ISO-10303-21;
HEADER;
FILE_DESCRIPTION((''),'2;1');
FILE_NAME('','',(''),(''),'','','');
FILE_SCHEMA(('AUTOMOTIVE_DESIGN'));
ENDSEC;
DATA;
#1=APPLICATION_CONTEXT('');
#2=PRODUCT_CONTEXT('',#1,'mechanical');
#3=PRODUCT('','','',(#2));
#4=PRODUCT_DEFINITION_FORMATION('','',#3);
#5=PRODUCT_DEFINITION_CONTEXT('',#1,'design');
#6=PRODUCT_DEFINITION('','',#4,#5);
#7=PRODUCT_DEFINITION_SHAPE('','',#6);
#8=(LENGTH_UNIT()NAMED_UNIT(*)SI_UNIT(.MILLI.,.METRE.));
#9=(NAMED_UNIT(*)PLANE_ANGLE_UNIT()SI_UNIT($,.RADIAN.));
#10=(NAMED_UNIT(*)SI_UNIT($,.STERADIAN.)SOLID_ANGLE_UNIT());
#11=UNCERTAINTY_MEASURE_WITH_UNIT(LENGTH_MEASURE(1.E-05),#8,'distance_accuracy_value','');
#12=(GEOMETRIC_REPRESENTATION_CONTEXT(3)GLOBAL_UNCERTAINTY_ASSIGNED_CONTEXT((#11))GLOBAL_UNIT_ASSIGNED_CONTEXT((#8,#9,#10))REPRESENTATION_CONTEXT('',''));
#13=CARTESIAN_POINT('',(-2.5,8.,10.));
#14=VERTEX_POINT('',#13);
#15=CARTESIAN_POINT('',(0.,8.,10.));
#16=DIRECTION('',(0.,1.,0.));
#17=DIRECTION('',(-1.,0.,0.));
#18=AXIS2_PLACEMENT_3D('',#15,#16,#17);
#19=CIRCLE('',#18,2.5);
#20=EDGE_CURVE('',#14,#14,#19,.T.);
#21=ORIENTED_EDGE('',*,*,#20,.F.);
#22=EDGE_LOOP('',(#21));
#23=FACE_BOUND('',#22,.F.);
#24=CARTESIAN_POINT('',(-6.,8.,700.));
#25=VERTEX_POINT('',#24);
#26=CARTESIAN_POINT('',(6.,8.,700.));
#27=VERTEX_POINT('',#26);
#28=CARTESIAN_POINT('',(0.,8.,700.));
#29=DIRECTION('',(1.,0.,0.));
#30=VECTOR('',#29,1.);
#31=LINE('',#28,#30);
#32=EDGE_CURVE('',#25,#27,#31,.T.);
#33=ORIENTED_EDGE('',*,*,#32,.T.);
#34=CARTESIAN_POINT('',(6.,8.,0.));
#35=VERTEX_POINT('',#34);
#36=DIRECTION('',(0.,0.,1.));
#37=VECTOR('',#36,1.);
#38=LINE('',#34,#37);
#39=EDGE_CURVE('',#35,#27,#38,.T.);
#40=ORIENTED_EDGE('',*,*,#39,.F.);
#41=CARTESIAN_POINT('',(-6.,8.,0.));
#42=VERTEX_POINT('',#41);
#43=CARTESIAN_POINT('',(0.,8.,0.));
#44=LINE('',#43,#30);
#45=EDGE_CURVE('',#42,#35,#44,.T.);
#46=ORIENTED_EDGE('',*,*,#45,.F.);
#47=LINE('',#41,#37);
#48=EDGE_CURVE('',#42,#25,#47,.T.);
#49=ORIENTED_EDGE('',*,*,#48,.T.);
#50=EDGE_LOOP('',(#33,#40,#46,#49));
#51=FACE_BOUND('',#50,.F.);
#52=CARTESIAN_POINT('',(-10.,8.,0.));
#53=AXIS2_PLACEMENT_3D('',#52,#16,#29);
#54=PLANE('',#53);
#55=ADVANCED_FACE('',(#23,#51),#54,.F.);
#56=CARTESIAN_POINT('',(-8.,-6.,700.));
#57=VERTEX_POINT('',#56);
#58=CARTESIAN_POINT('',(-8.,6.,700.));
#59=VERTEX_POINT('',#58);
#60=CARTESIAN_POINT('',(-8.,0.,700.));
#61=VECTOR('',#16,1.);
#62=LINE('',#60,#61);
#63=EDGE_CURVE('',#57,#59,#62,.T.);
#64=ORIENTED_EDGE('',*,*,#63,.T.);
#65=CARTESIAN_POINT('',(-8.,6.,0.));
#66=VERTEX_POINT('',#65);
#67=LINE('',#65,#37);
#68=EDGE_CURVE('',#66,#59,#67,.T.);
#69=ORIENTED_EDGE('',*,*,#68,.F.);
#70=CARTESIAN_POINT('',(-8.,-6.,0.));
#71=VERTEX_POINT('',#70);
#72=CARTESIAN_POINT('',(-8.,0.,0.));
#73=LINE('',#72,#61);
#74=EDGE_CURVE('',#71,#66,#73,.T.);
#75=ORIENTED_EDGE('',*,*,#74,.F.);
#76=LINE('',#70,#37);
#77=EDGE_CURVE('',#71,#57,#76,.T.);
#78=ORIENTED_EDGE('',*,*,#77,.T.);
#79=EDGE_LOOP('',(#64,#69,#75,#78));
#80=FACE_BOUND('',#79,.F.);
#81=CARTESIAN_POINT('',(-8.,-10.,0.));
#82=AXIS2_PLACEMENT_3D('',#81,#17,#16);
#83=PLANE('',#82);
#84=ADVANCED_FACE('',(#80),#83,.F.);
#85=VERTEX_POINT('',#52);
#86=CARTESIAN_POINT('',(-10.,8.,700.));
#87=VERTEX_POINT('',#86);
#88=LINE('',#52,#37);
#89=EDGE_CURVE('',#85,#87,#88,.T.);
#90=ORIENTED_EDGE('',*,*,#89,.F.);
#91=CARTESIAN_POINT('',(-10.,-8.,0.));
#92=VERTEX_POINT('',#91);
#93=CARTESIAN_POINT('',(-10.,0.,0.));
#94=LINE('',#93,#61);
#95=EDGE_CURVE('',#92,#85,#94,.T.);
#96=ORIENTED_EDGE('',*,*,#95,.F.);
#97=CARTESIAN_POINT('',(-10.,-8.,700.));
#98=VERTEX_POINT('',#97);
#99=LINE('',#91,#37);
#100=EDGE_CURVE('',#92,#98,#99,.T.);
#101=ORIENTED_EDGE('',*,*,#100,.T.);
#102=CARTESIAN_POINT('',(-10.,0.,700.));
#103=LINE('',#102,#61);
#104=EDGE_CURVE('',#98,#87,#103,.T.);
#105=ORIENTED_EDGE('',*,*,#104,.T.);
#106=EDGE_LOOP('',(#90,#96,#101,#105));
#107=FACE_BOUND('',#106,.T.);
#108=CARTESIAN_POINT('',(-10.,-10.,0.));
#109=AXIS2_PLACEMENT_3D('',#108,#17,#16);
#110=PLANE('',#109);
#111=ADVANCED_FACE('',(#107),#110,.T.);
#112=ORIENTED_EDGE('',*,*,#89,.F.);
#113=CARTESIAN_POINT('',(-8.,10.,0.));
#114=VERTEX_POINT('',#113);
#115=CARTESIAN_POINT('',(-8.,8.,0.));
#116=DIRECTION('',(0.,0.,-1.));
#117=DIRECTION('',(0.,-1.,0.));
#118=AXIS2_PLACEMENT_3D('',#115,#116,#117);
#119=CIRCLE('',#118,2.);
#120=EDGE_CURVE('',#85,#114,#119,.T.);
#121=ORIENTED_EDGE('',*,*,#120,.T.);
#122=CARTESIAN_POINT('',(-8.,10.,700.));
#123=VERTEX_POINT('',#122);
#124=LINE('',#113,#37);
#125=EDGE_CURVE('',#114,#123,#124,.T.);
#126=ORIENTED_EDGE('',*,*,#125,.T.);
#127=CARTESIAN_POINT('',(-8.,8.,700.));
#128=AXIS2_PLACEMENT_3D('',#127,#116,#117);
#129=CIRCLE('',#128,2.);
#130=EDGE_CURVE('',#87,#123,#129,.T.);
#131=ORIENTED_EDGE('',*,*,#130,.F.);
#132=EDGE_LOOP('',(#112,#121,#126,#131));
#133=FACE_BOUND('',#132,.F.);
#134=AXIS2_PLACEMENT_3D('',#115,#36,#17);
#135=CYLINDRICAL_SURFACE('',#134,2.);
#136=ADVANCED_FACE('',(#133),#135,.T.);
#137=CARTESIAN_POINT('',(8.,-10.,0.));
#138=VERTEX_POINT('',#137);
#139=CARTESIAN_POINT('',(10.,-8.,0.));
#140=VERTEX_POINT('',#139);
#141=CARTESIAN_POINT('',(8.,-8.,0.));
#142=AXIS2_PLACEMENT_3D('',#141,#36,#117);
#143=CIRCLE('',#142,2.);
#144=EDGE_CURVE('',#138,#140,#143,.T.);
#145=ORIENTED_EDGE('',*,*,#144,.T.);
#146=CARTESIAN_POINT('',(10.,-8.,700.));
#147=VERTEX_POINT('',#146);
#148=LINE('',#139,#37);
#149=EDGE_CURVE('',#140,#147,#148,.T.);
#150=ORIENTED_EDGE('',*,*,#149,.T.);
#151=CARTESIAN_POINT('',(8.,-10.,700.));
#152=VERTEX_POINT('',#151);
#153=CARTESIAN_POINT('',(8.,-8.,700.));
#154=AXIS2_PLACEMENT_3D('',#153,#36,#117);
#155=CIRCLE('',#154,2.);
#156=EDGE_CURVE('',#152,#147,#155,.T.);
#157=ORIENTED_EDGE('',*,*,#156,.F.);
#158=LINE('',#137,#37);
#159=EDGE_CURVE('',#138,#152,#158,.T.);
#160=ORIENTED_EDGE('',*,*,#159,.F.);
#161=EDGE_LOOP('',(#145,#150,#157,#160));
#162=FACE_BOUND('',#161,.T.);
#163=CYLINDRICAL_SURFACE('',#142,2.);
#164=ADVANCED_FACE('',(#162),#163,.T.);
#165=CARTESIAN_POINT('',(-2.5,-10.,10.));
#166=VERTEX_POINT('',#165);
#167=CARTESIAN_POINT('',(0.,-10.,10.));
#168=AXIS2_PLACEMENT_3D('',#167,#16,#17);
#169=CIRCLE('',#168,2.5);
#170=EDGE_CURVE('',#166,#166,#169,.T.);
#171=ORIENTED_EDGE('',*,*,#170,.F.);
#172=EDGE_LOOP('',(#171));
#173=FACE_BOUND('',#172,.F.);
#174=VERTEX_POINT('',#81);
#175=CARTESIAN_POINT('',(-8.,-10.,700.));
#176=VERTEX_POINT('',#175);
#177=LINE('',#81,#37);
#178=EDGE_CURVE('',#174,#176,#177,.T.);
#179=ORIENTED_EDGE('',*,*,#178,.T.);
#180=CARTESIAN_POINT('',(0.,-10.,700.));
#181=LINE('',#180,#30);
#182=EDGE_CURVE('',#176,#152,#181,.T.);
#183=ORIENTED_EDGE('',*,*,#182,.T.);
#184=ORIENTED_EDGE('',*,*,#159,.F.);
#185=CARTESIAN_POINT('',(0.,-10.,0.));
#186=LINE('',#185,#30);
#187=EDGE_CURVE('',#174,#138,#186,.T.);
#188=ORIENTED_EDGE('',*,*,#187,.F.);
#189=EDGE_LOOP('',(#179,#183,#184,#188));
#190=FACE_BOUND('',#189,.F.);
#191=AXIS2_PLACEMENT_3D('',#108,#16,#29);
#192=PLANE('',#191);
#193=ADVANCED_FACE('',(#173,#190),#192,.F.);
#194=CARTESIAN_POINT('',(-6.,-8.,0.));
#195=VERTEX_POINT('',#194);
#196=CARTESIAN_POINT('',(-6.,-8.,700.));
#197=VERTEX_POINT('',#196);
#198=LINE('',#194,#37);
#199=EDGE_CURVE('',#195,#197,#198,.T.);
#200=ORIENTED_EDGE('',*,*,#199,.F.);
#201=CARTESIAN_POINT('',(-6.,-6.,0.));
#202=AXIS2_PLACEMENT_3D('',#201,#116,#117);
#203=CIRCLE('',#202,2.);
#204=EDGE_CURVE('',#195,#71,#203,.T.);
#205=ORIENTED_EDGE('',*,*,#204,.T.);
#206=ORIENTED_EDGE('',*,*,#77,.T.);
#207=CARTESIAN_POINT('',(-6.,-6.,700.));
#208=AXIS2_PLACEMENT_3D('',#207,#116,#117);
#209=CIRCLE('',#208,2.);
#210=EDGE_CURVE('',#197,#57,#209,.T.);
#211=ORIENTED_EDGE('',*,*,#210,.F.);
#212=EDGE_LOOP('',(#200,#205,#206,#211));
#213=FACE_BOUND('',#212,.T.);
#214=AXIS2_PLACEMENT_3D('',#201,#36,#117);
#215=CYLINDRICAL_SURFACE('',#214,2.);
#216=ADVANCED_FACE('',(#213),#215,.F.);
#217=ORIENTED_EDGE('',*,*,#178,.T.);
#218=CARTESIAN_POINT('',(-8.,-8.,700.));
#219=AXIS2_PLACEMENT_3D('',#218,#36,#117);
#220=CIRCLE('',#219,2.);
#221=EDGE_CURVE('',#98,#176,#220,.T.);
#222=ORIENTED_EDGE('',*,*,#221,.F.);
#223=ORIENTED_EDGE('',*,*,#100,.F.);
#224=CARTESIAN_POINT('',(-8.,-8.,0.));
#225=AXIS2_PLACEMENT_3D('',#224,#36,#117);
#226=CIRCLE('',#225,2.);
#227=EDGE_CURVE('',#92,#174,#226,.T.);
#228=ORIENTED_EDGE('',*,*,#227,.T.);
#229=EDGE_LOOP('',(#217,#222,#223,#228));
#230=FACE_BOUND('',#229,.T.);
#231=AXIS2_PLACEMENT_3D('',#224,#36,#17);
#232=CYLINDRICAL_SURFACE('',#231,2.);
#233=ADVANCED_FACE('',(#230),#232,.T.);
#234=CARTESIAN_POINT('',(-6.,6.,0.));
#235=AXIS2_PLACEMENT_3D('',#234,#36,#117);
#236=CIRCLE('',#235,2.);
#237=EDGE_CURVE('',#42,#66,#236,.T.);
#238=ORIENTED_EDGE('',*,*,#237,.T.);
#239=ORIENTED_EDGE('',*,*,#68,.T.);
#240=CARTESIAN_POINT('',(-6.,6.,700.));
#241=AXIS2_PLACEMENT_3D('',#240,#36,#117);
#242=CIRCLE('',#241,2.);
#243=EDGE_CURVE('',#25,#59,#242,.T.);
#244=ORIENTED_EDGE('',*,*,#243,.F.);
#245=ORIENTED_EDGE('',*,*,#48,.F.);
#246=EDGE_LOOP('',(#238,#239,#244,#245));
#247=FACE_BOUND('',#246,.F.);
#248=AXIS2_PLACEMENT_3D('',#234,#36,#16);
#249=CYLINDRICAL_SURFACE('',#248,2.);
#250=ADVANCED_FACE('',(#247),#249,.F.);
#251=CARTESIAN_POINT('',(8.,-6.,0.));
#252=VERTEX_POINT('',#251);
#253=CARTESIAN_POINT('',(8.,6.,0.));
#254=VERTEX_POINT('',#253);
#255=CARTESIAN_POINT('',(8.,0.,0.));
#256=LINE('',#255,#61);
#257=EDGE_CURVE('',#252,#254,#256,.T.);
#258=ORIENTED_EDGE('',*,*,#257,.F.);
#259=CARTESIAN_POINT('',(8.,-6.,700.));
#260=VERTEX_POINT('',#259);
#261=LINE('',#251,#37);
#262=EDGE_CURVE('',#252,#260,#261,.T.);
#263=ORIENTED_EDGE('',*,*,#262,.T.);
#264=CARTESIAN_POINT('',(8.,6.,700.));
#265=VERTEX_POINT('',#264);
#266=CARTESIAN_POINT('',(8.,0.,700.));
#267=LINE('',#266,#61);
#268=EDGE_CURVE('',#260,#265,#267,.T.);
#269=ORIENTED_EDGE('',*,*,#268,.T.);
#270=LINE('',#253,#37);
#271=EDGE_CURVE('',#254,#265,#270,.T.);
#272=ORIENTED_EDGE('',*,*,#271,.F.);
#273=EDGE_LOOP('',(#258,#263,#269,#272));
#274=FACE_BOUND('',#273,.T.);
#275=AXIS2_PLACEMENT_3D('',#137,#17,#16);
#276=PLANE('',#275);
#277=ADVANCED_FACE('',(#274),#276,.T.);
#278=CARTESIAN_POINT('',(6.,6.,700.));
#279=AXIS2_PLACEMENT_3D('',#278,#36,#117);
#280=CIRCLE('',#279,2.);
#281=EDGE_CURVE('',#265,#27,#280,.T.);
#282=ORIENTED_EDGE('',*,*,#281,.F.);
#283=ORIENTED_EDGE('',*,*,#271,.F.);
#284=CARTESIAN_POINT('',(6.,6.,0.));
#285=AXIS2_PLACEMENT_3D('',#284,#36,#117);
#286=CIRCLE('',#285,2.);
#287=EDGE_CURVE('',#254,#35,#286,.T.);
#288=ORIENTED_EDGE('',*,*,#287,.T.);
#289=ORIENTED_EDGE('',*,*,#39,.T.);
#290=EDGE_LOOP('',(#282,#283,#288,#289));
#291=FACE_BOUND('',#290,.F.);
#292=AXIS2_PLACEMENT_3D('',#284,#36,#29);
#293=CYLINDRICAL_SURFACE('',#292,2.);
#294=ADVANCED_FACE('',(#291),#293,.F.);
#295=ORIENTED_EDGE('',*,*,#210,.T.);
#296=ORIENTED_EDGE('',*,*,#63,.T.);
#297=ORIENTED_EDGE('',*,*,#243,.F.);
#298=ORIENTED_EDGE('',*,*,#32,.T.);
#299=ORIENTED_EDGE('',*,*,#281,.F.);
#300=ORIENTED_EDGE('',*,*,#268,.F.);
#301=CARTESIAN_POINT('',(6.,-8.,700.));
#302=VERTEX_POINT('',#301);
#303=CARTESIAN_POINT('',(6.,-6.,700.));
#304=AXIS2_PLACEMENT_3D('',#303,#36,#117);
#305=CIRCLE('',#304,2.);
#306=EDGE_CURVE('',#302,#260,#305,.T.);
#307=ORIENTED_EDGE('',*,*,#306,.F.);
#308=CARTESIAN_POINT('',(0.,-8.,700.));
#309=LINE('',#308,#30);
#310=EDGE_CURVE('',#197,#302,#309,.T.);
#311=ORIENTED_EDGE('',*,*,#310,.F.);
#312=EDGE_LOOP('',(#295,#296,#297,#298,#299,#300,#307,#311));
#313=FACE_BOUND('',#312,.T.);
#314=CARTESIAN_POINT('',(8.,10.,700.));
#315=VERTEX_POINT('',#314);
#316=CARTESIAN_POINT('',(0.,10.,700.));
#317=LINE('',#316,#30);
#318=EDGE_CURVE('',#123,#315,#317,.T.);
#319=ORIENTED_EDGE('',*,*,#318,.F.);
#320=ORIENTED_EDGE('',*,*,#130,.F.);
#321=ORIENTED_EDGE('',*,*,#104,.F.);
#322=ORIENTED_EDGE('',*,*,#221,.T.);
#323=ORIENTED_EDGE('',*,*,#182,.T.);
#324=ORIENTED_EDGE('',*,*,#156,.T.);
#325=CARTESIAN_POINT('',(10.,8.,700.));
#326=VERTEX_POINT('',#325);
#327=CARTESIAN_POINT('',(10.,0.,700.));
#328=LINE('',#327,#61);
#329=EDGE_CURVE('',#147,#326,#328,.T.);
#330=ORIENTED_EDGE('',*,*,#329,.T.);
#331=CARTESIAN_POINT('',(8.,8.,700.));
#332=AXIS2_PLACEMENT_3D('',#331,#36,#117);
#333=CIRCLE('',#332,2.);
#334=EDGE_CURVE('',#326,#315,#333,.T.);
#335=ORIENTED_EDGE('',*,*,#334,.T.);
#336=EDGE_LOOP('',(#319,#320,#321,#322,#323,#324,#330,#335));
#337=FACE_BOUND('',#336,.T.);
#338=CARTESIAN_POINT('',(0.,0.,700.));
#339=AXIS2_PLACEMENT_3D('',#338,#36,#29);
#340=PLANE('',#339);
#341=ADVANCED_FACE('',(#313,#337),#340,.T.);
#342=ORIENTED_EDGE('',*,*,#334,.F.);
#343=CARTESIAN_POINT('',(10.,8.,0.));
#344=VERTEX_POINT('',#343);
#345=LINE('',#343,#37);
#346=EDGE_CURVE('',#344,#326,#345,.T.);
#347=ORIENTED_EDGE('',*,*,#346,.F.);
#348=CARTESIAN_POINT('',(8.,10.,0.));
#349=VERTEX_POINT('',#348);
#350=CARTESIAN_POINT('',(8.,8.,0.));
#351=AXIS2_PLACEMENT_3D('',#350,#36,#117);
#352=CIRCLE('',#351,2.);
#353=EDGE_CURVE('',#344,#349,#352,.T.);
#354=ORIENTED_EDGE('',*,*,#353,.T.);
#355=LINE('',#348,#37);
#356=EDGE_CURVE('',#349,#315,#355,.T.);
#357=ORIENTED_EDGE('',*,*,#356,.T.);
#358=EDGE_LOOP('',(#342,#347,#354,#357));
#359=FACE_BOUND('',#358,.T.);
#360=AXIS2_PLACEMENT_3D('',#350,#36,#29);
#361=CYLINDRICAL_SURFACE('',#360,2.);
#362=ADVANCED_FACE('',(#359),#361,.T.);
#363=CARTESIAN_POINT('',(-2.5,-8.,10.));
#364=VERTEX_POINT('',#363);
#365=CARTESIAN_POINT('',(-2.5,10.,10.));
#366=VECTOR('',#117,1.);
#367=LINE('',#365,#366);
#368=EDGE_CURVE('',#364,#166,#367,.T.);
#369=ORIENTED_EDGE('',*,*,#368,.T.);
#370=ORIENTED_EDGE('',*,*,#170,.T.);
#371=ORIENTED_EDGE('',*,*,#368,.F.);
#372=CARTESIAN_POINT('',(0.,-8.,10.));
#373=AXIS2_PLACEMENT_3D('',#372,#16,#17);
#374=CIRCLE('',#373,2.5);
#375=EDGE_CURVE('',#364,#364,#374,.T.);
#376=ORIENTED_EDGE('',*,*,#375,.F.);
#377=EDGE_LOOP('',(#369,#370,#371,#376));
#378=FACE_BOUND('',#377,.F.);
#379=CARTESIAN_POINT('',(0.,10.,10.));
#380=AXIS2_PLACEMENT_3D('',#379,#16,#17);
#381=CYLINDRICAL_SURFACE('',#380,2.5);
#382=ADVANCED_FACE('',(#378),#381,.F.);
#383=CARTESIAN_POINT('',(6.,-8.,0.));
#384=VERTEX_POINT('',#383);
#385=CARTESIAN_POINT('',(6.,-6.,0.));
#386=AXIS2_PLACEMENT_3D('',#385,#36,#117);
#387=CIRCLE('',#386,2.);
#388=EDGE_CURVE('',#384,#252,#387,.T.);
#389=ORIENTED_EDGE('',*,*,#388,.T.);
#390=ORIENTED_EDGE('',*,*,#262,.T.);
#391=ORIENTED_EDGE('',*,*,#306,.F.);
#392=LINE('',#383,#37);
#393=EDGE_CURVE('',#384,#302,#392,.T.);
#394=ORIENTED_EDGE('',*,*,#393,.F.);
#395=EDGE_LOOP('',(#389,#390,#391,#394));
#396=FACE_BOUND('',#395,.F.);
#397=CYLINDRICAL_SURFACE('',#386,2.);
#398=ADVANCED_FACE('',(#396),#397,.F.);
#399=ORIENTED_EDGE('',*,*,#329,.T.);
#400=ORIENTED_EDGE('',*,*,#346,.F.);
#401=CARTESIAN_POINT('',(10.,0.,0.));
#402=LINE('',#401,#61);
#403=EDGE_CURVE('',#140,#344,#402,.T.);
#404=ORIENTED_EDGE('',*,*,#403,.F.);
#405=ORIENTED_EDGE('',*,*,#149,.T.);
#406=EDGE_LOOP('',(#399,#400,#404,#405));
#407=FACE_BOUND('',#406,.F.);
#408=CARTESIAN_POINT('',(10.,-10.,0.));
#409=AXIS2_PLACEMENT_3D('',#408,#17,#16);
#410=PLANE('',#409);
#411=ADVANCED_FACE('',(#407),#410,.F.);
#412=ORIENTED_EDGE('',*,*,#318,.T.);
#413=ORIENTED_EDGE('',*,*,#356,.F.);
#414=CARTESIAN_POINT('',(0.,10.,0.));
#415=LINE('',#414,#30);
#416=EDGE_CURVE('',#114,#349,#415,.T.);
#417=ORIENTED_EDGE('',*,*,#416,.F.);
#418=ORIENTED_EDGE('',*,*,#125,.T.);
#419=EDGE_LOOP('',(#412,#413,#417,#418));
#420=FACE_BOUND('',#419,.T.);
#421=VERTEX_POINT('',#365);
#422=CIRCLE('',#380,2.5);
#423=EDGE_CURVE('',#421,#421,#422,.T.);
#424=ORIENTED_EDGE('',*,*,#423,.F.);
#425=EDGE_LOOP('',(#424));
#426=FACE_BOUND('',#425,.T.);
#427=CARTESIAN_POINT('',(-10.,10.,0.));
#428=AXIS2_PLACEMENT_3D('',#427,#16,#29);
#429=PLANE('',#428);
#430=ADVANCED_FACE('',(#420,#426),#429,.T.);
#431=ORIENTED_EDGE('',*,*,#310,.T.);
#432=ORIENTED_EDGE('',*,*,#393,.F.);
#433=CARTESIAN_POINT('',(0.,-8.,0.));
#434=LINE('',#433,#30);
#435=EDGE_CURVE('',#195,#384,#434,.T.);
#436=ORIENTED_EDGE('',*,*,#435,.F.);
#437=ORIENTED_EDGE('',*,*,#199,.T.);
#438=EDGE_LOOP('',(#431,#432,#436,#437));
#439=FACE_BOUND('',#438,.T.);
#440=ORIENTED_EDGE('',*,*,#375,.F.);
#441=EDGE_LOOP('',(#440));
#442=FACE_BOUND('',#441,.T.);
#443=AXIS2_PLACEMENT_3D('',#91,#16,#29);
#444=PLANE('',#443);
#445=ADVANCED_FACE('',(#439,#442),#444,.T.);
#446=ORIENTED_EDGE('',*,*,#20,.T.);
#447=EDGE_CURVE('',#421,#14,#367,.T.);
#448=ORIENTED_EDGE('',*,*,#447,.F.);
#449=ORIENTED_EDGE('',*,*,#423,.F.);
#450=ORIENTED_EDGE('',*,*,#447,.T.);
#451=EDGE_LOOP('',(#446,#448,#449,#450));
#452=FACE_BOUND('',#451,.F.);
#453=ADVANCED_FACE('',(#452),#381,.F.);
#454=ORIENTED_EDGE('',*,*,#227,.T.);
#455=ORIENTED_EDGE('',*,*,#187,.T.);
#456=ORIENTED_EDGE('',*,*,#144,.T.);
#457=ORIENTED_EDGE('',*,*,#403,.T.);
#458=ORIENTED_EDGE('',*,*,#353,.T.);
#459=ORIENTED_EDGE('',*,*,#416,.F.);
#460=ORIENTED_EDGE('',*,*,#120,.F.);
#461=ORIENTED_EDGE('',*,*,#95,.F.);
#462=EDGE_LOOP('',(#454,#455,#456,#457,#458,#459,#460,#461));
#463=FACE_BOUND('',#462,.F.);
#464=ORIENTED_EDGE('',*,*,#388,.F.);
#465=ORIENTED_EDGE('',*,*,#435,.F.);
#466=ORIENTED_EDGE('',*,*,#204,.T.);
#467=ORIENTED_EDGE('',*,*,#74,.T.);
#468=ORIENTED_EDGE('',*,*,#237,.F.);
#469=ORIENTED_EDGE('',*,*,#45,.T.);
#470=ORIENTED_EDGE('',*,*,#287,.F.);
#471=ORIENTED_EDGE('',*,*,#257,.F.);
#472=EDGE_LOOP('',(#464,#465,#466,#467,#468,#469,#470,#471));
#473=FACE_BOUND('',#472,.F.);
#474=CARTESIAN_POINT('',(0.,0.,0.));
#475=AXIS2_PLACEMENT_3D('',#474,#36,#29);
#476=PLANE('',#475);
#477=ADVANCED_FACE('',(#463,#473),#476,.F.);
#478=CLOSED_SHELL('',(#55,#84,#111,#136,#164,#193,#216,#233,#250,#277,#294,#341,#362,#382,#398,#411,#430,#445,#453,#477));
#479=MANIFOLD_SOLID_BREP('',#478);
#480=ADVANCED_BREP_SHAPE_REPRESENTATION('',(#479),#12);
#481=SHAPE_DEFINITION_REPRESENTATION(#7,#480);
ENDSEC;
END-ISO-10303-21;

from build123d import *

# Parameters (mm, degrees)
F0_W     = 20
F0_H     = 20
F1_DEPTH = 700
F2_R     = 2
F3_T     = 2
F4_R     = 2
F5_R     = 2.5
F6_DEPTH = 25.2


# Not quite as in the source:
# - a shell that OpenCascade refuses in one call is made with other operations: the cavity is built on its own and cut out


with BuildPart() as f1:
    # F0 (on Top) → F1 (new body)
    with BuildSketch(Plane.XY):
        Rectangle(F0_W, F0_H)
    extrude(amount=F1_DEPTH)

    # F2
    f2_edges = [f1.edges().sort_by_distance(p)[0] for p in [
        (-10, 10, 350),
        (-10, -10, 350),
        (10, -10, 350),
        (10, 10, 350),
    ]]
    fillet(f2_edges, radius=F2_R)

    # F3: shell of thickness 2, made by hand


with BuildPart() as f3_core1:
    # F3_t2: copy of F1
    add(f1.part)

    # the walls: a layer under each face that stays
    f3_faces = [f3_core1.faces().sort_by_distance(p)[0] for p in [
        (0, -10, 350),
        (-10, 0, 350),
        (10, 0, 350),
        (0, 10, 350),
    ]]
    thicken(f3_faces, amount=-F3_T, mode=Mode.SUBTRACT)


with BuildPart() as f1_1:
    add(f1.part)

    # what is left inside the walls is the cavity
    f3_cavity = [f3_core1.part.solids().sort_by_distance(p)[0] for p in [
        (-7.98, 0, 466.666667),
    ]]
    add(f3_cavity, mode=Mode.SUBTRACT)

    # F4
    f4_edges = [f1_1.edges().sort_by_distance(p)[0] for p in [
        (-8, 8, 350),
        (-8, -8, 350),
        (8, -8, 350),
        (8, 8, 350),
    ]]
    fillet(f4_edges, radius=F4_R)

    # F5 (on face) → F6 (cut)
    with BuildSketch(Plane(origin=(0, 10, 0), x_dir=(-1, 0, 0), z_dir=(0, 1, 0))):
        with Locations((0, 10)):
            Circle(F5_R)
    extrude(amount=-F6_DEPTH, mode=Mode.SUBTRACT)


solid = f1_1.part
